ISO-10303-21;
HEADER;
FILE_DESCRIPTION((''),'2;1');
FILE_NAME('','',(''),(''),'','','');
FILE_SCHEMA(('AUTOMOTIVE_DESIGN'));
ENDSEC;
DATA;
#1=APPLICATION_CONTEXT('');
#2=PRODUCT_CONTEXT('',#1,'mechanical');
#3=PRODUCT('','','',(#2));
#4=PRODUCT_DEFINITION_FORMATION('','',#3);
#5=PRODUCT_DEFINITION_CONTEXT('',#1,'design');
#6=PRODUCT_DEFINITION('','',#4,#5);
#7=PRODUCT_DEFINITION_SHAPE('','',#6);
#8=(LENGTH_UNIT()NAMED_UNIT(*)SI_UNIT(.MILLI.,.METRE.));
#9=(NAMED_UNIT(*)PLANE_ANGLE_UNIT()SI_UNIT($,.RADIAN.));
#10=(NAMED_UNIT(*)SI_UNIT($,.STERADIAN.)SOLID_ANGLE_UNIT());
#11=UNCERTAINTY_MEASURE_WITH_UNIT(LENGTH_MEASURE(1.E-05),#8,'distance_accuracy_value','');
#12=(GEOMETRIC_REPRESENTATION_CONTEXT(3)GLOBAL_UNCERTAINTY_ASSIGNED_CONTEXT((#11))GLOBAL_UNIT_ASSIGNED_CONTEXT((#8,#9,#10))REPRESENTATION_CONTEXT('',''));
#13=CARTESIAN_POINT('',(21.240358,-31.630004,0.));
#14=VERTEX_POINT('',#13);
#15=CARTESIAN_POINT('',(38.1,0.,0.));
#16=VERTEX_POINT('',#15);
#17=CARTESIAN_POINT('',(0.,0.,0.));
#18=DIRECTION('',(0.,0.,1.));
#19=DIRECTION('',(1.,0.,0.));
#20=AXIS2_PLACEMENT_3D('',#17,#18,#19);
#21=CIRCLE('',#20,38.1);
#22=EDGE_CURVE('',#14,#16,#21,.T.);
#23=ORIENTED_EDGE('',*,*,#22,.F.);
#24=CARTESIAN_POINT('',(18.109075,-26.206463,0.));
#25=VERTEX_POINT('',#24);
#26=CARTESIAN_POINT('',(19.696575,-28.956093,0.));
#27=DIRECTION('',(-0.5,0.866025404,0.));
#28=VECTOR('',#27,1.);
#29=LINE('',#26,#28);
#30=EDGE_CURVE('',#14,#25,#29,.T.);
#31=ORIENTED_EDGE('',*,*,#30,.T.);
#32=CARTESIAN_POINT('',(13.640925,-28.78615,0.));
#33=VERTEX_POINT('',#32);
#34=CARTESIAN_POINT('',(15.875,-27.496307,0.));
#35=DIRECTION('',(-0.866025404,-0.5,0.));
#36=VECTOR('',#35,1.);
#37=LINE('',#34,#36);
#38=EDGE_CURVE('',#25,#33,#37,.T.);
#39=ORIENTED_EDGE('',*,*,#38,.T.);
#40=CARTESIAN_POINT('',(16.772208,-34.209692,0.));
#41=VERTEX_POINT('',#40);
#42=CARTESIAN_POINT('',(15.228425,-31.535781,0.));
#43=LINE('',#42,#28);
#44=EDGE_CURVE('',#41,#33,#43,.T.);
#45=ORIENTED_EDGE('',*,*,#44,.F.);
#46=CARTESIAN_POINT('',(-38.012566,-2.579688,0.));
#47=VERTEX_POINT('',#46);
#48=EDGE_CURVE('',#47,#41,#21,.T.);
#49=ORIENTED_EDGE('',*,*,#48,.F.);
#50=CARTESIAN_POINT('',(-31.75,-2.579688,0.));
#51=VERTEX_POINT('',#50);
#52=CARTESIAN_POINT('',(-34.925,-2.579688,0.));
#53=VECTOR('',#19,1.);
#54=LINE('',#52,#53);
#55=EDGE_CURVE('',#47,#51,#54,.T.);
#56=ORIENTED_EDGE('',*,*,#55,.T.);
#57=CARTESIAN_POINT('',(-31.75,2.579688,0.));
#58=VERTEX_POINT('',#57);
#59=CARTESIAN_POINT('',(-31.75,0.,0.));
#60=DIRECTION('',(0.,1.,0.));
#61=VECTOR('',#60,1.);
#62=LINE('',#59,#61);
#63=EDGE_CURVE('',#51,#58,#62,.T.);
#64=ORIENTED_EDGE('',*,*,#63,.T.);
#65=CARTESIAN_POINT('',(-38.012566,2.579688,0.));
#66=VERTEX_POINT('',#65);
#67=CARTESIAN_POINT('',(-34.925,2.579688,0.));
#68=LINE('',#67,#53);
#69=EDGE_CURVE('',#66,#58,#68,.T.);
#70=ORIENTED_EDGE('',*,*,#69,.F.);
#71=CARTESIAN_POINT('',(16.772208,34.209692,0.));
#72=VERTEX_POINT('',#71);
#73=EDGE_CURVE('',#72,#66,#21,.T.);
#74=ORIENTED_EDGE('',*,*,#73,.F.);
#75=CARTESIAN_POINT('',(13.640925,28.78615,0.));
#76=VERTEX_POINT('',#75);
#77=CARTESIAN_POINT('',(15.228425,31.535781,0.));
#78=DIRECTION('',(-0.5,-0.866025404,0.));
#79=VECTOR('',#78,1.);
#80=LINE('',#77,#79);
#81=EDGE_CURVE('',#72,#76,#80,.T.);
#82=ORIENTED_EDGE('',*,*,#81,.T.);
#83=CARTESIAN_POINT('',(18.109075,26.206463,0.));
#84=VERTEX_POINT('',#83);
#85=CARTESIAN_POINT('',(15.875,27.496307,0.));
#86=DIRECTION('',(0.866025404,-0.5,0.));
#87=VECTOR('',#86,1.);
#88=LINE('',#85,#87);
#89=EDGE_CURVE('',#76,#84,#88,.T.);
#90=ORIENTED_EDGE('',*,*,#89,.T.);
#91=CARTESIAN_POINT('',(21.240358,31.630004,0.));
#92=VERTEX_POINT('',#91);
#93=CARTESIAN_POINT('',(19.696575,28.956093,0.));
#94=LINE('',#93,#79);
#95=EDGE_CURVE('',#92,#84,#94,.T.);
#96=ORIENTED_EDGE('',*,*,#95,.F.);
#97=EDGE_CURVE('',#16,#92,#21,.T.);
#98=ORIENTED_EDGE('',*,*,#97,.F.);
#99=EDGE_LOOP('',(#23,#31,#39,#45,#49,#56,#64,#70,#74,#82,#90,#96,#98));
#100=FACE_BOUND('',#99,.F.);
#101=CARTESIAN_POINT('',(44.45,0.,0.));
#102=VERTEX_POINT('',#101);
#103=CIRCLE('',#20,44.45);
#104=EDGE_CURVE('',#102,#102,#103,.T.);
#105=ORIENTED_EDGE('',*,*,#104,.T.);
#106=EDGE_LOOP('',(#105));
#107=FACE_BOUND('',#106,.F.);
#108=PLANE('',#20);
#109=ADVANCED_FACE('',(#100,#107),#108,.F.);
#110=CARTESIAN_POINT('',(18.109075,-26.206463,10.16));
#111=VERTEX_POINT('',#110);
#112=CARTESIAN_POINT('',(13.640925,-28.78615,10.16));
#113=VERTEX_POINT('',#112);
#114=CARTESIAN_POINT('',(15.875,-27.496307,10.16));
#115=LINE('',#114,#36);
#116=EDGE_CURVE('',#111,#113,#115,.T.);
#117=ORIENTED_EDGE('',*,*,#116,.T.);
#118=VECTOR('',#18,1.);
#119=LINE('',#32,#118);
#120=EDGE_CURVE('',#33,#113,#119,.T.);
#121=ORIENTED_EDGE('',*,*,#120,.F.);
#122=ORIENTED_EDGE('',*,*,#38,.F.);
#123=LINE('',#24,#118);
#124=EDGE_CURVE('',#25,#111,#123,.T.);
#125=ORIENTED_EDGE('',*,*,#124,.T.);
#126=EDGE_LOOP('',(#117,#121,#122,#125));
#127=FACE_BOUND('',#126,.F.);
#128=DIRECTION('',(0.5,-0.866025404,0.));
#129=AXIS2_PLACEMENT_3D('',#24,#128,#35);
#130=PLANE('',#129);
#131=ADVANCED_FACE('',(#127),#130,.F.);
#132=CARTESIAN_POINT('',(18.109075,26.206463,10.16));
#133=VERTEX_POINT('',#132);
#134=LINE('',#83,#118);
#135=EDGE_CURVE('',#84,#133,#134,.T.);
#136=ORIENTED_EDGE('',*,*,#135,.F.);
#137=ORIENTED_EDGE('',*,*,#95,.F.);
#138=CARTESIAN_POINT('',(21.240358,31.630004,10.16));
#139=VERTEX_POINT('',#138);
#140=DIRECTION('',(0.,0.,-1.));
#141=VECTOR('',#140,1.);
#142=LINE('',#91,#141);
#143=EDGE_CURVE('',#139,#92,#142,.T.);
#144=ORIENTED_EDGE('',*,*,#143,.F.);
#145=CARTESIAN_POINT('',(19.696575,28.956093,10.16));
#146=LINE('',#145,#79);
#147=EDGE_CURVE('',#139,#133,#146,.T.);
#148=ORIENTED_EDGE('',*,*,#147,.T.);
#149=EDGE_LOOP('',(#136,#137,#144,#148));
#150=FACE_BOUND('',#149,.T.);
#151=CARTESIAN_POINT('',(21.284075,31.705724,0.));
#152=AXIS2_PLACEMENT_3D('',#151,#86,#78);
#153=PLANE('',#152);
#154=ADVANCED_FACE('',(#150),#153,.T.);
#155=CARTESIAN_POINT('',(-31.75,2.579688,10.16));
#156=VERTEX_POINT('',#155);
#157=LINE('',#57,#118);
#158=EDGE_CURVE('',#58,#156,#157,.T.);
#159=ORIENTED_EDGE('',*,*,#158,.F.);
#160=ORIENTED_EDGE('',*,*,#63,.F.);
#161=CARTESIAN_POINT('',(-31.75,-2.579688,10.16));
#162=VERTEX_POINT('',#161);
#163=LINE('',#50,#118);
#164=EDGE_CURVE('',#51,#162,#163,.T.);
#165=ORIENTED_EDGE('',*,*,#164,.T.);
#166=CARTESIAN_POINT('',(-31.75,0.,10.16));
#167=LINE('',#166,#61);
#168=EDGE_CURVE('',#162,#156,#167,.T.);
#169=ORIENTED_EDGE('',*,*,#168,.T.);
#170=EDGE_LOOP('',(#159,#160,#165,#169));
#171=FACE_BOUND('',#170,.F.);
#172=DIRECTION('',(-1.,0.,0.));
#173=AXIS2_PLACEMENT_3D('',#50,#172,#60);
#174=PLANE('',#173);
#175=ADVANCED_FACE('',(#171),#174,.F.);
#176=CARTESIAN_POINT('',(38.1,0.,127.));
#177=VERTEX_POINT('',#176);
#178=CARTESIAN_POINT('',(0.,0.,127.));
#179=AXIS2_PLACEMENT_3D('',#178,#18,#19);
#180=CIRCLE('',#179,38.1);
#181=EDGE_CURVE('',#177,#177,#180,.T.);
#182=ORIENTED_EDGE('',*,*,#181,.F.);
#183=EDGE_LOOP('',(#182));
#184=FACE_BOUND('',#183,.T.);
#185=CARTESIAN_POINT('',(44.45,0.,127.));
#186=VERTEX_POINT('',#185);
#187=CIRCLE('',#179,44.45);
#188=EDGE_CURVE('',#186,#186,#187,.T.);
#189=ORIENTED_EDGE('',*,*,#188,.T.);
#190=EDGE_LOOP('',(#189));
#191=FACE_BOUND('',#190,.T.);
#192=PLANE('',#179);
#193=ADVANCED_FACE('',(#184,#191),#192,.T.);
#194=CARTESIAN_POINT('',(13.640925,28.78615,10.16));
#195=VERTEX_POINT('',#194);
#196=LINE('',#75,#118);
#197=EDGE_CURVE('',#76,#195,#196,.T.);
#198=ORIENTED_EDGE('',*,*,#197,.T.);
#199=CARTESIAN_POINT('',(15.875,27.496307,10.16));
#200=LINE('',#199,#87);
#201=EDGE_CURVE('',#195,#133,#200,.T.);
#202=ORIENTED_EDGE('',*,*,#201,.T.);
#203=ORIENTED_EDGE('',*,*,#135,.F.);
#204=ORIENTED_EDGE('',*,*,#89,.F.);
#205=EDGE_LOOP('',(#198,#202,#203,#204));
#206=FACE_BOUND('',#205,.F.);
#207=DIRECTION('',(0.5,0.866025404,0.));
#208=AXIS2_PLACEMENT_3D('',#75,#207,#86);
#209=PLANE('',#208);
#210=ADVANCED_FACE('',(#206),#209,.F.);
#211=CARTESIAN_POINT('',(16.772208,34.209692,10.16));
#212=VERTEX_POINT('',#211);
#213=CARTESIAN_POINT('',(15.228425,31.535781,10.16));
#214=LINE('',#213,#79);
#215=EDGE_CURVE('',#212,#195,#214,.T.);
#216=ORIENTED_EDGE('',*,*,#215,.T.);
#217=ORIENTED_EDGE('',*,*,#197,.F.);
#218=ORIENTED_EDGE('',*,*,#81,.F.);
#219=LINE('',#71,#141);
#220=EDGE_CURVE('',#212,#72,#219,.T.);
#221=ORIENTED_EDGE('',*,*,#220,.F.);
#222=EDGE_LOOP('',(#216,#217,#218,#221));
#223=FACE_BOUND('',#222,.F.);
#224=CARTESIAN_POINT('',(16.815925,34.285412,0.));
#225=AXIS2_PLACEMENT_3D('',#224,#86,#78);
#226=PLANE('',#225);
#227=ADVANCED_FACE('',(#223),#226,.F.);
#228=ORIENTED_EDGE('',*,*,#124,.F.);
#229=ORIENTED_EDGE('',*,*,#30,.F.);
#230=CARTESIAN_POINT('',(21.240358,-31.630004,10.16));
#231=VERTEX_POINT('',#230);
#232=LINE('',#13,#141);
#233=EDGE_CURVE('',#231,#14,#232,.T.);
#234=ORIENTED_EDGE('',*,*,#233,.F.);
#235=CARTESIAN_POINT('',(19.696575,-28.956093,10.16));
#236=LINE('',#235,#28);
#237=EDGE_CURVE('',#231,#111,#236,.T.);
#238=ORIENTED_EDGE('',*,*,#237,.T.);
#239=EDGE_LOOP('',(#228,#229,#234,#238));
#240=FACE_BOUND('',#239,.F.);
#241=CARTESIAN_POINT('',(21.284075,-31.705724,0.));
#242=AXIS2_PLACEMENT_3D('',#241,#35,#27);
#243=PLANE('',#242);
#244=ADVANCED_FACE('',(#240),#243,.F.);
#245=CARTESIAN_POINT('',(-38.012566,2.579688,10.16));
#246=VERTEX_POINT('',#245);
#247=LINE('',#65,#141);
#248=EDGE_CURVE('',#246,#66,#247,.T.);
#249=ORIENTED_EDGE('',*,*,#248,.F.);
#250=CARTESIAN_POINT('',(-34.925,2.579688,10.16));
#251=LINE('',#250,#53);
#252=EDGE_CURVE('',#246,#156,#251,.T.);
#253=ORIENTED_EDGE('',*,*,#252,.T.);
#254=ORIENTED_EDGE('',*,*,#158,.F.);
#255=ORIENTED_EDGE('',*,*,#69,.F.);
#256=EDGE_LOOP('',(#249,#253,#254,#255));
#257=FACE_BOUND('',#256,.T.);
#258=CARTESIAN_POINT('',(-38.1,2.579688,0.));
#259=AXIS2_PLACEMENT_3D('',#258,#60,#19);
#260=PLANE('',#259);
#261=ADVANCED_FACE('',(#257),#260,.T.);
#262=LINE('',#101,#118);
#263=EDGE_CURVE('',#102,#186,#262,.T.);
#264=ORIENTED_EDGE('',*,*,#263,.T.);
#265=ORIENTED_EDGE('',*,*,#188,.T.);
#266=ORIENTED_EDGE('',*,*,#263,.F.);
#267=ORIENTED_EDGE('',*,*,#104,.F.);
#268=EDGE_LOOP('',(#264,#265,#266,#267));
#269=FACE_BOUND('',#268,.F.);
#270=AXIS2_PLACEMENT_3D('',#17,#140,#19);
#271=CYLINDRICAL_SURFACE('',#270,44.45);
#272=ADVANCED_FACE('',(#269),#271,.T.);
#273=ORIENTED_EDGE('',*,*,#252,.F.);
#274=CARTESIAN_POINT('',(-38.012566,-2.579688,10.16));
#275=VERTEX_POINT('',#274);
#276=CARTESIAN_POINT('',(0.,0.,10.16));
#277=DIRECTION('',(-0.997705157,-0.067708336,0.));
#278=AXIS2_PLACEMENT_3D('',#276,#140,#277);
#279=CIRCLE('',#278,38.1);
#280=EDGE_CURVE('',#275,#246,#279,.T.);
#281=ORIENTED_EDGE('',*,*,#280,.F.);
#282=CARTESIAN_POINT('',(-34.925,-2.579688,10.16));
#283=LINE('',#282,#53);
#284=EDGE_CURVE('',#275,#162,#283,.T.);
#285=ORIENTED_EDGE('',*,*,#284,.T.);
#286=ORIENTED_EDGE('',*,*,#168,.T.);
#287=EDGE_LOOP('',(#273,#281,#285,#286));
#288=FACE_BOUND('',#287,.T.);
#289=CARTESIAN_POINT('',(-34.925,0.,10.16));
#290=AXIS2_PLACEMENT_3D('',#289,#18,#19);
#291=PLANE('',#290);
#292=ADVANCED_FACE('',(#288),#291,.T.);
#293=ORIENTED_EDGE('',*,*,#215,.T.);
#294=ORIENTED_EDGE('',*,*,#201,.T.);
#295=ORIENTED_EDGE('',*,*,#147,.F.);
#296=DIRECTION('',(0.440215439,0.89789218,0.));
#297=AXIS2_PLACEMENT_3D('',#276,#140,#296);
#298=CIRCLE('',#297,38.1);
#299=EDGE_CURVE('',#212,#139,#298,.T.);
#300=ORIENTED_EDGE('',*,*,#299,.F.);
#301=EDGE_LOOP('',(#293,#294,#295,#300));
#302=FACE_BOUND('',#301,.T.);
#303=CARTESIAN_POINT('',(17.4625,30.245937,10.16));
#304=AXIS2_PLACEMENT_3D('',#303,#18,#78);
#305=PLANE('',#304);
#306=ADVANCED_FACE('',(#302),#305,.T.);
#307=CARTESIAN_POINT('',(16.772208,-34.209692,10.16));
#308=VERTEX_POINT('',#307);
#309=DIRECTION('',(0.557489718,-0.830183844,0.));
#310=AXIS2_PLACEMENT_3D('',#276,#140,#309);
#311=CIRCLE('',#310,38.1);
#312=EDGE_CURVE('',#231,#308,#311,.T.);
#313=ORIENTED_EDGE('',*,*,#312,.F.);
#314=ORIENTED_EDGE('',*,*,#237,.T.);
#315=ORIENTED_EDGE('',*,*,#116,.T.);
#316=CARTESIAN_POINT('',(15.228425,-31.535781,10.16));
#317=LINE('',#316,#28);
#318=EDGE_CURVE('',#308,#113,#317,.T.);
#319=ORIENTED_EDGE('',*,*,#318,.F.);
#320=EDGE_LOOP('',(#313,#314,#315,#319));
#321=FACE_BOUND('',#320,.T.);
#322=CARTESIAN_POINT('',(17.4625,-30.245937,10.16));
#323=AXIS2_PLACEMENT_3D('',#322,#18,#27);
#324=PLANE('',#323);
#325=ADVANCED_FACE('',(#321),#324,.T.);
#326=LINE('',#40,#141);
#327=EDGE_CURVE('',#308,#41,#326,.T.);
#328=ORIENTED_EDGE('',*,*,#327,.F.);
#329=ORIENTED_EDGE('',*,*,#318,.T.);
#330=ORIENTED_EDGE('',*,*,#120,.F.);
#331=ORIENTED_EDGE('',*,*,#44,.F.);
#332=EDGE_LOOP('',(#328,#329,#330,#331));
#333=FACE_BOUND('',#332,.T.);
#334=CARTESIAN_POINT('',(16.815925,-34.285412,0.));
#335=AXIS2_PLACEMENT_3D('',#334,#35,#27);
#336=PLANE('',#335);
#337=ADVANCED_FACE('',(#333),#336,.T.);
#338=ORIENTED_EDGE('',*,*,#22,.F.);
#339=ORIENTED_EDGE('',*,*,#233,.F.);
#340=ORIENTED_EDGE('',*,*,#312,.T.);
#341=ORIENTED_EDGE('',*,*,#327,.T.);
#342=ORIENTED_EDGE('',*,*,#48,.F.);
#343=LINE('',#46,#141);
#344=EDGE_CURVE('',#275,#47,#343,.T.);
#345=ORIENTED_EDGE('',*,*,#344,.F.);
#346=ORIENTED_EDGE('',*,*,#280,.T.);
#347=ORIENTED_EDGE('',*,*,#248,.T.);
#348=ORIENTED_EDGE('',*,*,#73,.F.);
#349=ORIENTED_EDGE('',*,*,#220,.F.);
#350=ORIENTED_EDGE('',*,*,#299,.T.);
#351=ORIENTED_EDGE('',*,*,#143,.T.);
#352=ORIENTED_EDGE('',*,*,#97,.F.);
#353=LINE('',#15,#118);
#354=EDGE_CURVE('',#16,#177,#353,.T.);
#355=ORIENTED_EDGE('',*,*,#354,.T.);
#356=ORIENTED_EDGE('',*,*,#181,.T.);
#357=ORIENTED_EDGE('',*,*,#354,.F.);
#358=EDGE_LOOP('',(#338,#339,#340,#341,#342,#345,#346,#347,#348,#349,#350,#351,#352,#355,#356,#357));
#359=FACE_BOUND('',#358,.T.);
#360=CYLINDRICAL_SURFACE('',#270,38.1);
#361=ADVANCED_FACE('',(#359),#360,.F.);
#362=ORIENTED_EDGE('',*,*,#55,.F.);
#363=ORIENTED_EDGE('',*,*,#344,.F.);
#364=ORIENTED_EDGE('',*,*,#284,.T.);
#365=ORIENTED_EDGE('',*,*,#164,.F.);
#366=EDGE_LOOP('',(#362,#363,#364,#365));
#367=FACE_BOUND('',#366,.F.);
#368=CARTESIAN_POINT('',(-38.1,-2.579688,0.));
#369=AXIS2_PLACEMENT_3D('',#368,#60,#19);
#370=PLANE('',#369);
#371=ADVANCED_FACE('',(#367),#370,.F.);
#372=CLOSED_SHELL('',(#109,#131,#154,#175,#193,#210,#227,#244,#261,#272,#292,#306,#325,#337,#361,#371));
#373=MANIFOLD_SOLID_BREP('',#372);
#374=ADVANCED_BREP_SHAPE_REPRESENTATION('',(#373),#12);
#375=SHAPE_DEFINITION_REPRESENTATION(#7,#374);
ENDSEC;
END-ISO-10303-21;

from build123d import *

# Parameters (mm, degrees)
F0_R            = 44.45
F0_R_2          = 38.1
F1_DEPTH        = 127
F2_W            = 6.35
F2_H            = 5.1593752402
F3_DEPTH        = 10.16
F3_COPIES_COUNT = 3


# Not quite as in the source:
# - a pattern or mirror of a feature is missing from the dataset's text; its kind, count and spacing are read off the source's solid


with BuildPart() as f1:
    # F0 (on Top) → F1 (new body)
    with BuildSketch(Plane.XY):
        Circle(F0_R)
        Circle(F0_R_2, mode=Mode.SUBTRACT)
    extrude(amount=F1_DEPTH)

    # F2 (on Top) → F3 (join)
    with BuildSketch(Plane.XY):
        with Locations((-34.925, 0)):
            Rectangle(F2_W, F2_H)
    f3 = extrude(amount=F3_DEPTH)

    # F3_copies: F3 ×3 about axis
    f3_copies_axis = Axis((0, 0, 0), (0, 0, 1))
    for i in range(1, F3_COPIES_COUNT):
        add(f3.rotate(f3_copies_axis, i * 360 / F3_COPIES_COUNT))


solid = f1.part
